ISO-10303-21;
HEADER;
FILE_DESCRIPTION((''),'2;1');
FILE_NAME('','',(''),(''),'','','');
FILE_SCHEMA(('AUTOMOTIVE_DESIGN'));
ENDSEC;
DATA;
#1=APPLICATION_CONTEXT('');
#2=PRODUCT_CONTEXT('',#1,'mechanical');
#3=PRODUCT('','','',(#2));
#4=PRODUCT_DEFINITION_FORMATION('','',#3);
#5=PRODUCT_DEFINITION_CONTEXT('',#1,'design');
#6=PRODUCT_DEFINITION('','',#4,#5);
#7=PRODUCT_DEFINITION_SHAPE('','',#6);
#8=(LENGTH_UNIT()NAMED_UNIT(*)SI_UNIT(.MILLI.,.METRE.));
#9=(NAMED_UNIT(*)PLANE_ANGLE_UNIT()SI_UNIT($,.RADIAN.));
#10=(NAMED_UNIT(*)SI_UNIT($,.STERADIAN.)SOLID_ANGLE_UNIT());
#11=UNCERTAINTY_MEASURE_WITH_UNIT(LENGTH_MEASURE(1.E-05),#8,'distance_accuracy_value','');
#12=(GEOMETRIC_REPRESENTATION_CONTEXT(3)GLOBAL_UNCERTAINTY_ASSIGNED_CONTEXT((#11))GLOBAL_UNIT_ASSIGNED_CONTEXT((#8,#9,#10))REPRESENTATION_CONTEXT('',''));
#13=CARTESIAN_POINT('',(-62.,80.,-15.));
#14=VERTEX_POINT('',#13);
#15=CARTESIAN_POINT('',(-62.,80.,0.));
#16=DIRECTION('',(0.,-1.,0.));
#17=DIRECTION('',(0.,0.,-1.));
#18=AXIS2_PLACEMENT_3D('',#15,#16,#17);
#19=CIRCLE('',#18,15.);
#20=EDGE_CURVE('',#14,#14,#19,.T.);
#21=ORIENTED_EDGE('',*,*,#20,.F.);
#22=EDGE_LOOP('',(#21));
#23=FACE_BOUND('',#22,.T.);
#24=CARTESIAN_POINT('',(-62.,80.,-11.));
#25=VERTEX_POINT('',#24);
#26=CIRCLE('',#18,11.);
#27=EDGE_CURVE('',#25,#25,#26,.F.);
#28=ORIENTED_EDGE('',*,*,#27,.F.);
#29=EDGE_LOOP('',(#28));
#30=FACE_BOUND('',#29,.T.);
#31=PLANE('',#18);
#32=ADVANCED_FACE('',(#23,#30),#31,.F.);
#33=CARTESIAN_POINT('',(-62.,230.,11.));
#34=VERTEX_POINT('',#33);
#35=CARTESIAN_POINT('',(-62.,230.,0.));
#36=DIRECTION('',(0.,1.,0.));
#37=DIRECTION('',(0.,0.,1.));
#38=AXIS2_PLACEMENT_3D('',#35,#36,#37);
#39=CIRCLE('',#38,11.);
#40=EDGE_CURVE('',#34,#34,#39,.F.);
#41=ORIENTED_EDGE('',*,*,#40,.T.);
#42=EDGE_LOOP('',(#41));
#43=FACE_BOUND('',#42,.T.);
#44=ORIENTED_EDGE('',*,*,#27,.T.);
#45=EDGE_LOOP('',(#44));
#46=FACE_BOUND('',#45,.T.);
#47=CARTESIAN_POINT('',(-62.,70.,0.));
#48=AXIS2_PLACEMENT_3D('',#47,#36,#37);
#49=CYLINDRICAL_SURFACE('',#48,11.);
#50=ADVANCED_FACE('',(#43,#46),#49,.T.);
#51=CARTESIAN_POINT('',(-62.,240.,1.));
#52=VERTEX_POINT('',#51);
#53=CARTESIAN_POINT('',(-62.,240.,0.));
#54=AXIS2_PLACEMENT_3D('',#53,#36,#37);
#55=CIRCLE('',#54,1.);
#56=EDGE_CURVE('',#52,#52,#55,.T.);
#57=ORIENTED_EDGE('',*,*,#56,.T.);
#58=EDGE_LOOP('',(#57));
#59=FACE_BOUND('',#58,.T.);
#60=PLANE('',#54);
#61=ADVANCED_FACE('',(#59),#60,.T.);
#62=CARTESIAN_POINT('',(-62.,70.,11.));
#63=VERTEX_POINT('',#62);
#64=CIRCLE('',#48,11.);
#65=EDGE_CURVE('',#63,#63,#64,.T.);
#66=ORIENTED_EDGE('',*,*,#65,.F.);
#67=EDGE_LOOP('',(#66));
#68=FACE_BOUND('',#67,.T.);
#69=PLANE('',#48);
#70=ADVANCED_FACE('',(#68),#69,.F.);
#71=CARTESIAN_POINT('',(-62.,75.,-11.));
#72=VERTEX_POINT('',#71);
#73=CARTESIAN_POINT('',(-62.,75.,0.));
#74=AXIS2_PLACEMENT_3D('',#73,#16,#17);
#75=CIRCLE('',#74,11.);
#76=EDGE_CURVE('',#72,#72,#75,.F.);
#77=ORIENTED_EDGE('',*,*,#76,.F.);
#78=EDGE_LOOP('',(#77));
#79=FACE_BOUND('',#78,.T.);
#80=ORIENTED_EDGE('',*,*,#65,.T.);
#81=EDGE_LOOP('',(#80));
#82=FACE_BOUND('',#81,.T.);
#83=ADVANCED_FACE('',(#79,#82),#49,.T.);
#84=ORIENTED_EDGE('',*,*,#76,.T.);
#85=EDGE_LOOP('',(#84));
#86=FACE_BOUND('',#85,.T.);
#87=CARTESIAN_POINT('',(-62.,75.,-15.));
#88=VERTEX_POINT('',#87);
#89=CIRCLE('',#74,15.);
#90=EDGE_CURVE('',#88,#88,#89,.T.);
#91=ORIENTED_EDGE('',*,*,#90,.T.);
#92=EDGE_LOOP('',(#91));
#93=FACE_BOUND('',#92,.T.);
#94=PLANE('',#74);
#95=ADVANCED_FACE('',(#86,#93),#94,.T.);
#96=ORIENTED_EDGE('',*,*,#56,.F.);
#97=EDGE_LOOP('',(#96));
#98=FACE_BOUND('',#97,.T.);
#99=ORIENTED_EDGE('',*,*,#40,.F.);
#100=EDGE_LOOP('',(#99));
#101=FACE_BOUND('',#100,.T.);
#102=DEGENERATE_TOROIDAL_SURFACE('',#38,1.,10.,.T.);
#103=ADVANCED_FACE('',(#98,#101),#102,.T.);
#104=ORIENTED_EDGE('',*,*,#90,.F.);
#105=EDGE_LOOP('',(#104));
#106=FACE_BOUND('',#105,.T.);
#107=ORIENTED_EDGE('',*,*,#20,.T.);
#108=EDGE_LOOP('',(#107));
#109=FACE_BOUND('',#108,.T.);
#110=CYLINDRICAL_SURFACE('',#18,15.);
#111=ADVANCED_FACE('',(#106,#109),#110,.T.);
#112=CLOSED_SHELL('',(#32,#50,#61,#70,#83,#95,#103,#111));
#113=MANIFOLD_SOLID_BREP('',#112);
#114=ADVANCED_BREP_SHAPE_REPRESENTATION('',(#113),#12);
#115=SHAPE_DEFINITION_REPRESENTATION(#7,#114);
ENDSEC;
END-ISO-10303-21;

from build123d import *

# Parameters (mm, degrees)
STOCK_100996468_LAB1B_1_START         = 70
STOCK_100996468_LAB1B_1_OUTLINE_R     = 11
STOCK_100996468_LAB1B_1_DEPTH         = 170
STOCK_100996468_LAB1B_1_START_2       = 75
STOCK_100996468_LAB1B_1_2_OUTLINE_R   = 15
STOCK_100996468_LAB1B_1_2_OUTLINE_R_2 = 11
STOCK_100996468_LAB1B_1_2_DEPTH       = 5
FILLET1_R                             = 10


# Read off the part's stored shape, not the designer's step: Stock-100996468_Lab1B-1
with BuildPart() as part:
    # Stock-100996468_Lab1B-1 outline → Stock-100996468_Lab1B-1 (new body)
    with BuildSketch(Plane(origin=(0, 0, 0), x_dir=(1, 0, 0), z_dir=(0, 1, 0)).offset(STOCK_100996468_LAB1B_1_START)):
        with Locations((-62, 0)):
            Circle(STOCK_100996468_LAB1B_1_OUTLINE_R)
    extrude(amount=STOCK_100996468_LAB1B_1_DEPTH)

    # Stock-100996468_Lab1B-1 2 outline → Stock-100996468_Lab1B-1 2 (add)
    with BuildSketch(Plane(origin=(0, 0, 0), x_dir=(1, 0, 0), z_dir=(0, 1, 0)).offset(STOCK_100996468_LAB1B_1_START_2)):
        with Locations((-62, 0)):
            Circle(STOCK_100996468_LAB1B_1_2_OUTLINE_R)
        with Locations((-62, 0)):
            Circle(STOCK_100996468_LAB1B_1_2_OUTLINE_R_2, mode=Mode.SUBTRACT)
    extrude(amount=STOCK_100996468_LAB1B_1_2_DEPTH)

    # Fillet1
    fillet1_edges = [part.edges().sort_by_distance(p)[0] for p in [
        (-73, 240, 0),
    ]]
    fillet(fillet1_edges, radius=FILLET1_R)


solid = part.part
